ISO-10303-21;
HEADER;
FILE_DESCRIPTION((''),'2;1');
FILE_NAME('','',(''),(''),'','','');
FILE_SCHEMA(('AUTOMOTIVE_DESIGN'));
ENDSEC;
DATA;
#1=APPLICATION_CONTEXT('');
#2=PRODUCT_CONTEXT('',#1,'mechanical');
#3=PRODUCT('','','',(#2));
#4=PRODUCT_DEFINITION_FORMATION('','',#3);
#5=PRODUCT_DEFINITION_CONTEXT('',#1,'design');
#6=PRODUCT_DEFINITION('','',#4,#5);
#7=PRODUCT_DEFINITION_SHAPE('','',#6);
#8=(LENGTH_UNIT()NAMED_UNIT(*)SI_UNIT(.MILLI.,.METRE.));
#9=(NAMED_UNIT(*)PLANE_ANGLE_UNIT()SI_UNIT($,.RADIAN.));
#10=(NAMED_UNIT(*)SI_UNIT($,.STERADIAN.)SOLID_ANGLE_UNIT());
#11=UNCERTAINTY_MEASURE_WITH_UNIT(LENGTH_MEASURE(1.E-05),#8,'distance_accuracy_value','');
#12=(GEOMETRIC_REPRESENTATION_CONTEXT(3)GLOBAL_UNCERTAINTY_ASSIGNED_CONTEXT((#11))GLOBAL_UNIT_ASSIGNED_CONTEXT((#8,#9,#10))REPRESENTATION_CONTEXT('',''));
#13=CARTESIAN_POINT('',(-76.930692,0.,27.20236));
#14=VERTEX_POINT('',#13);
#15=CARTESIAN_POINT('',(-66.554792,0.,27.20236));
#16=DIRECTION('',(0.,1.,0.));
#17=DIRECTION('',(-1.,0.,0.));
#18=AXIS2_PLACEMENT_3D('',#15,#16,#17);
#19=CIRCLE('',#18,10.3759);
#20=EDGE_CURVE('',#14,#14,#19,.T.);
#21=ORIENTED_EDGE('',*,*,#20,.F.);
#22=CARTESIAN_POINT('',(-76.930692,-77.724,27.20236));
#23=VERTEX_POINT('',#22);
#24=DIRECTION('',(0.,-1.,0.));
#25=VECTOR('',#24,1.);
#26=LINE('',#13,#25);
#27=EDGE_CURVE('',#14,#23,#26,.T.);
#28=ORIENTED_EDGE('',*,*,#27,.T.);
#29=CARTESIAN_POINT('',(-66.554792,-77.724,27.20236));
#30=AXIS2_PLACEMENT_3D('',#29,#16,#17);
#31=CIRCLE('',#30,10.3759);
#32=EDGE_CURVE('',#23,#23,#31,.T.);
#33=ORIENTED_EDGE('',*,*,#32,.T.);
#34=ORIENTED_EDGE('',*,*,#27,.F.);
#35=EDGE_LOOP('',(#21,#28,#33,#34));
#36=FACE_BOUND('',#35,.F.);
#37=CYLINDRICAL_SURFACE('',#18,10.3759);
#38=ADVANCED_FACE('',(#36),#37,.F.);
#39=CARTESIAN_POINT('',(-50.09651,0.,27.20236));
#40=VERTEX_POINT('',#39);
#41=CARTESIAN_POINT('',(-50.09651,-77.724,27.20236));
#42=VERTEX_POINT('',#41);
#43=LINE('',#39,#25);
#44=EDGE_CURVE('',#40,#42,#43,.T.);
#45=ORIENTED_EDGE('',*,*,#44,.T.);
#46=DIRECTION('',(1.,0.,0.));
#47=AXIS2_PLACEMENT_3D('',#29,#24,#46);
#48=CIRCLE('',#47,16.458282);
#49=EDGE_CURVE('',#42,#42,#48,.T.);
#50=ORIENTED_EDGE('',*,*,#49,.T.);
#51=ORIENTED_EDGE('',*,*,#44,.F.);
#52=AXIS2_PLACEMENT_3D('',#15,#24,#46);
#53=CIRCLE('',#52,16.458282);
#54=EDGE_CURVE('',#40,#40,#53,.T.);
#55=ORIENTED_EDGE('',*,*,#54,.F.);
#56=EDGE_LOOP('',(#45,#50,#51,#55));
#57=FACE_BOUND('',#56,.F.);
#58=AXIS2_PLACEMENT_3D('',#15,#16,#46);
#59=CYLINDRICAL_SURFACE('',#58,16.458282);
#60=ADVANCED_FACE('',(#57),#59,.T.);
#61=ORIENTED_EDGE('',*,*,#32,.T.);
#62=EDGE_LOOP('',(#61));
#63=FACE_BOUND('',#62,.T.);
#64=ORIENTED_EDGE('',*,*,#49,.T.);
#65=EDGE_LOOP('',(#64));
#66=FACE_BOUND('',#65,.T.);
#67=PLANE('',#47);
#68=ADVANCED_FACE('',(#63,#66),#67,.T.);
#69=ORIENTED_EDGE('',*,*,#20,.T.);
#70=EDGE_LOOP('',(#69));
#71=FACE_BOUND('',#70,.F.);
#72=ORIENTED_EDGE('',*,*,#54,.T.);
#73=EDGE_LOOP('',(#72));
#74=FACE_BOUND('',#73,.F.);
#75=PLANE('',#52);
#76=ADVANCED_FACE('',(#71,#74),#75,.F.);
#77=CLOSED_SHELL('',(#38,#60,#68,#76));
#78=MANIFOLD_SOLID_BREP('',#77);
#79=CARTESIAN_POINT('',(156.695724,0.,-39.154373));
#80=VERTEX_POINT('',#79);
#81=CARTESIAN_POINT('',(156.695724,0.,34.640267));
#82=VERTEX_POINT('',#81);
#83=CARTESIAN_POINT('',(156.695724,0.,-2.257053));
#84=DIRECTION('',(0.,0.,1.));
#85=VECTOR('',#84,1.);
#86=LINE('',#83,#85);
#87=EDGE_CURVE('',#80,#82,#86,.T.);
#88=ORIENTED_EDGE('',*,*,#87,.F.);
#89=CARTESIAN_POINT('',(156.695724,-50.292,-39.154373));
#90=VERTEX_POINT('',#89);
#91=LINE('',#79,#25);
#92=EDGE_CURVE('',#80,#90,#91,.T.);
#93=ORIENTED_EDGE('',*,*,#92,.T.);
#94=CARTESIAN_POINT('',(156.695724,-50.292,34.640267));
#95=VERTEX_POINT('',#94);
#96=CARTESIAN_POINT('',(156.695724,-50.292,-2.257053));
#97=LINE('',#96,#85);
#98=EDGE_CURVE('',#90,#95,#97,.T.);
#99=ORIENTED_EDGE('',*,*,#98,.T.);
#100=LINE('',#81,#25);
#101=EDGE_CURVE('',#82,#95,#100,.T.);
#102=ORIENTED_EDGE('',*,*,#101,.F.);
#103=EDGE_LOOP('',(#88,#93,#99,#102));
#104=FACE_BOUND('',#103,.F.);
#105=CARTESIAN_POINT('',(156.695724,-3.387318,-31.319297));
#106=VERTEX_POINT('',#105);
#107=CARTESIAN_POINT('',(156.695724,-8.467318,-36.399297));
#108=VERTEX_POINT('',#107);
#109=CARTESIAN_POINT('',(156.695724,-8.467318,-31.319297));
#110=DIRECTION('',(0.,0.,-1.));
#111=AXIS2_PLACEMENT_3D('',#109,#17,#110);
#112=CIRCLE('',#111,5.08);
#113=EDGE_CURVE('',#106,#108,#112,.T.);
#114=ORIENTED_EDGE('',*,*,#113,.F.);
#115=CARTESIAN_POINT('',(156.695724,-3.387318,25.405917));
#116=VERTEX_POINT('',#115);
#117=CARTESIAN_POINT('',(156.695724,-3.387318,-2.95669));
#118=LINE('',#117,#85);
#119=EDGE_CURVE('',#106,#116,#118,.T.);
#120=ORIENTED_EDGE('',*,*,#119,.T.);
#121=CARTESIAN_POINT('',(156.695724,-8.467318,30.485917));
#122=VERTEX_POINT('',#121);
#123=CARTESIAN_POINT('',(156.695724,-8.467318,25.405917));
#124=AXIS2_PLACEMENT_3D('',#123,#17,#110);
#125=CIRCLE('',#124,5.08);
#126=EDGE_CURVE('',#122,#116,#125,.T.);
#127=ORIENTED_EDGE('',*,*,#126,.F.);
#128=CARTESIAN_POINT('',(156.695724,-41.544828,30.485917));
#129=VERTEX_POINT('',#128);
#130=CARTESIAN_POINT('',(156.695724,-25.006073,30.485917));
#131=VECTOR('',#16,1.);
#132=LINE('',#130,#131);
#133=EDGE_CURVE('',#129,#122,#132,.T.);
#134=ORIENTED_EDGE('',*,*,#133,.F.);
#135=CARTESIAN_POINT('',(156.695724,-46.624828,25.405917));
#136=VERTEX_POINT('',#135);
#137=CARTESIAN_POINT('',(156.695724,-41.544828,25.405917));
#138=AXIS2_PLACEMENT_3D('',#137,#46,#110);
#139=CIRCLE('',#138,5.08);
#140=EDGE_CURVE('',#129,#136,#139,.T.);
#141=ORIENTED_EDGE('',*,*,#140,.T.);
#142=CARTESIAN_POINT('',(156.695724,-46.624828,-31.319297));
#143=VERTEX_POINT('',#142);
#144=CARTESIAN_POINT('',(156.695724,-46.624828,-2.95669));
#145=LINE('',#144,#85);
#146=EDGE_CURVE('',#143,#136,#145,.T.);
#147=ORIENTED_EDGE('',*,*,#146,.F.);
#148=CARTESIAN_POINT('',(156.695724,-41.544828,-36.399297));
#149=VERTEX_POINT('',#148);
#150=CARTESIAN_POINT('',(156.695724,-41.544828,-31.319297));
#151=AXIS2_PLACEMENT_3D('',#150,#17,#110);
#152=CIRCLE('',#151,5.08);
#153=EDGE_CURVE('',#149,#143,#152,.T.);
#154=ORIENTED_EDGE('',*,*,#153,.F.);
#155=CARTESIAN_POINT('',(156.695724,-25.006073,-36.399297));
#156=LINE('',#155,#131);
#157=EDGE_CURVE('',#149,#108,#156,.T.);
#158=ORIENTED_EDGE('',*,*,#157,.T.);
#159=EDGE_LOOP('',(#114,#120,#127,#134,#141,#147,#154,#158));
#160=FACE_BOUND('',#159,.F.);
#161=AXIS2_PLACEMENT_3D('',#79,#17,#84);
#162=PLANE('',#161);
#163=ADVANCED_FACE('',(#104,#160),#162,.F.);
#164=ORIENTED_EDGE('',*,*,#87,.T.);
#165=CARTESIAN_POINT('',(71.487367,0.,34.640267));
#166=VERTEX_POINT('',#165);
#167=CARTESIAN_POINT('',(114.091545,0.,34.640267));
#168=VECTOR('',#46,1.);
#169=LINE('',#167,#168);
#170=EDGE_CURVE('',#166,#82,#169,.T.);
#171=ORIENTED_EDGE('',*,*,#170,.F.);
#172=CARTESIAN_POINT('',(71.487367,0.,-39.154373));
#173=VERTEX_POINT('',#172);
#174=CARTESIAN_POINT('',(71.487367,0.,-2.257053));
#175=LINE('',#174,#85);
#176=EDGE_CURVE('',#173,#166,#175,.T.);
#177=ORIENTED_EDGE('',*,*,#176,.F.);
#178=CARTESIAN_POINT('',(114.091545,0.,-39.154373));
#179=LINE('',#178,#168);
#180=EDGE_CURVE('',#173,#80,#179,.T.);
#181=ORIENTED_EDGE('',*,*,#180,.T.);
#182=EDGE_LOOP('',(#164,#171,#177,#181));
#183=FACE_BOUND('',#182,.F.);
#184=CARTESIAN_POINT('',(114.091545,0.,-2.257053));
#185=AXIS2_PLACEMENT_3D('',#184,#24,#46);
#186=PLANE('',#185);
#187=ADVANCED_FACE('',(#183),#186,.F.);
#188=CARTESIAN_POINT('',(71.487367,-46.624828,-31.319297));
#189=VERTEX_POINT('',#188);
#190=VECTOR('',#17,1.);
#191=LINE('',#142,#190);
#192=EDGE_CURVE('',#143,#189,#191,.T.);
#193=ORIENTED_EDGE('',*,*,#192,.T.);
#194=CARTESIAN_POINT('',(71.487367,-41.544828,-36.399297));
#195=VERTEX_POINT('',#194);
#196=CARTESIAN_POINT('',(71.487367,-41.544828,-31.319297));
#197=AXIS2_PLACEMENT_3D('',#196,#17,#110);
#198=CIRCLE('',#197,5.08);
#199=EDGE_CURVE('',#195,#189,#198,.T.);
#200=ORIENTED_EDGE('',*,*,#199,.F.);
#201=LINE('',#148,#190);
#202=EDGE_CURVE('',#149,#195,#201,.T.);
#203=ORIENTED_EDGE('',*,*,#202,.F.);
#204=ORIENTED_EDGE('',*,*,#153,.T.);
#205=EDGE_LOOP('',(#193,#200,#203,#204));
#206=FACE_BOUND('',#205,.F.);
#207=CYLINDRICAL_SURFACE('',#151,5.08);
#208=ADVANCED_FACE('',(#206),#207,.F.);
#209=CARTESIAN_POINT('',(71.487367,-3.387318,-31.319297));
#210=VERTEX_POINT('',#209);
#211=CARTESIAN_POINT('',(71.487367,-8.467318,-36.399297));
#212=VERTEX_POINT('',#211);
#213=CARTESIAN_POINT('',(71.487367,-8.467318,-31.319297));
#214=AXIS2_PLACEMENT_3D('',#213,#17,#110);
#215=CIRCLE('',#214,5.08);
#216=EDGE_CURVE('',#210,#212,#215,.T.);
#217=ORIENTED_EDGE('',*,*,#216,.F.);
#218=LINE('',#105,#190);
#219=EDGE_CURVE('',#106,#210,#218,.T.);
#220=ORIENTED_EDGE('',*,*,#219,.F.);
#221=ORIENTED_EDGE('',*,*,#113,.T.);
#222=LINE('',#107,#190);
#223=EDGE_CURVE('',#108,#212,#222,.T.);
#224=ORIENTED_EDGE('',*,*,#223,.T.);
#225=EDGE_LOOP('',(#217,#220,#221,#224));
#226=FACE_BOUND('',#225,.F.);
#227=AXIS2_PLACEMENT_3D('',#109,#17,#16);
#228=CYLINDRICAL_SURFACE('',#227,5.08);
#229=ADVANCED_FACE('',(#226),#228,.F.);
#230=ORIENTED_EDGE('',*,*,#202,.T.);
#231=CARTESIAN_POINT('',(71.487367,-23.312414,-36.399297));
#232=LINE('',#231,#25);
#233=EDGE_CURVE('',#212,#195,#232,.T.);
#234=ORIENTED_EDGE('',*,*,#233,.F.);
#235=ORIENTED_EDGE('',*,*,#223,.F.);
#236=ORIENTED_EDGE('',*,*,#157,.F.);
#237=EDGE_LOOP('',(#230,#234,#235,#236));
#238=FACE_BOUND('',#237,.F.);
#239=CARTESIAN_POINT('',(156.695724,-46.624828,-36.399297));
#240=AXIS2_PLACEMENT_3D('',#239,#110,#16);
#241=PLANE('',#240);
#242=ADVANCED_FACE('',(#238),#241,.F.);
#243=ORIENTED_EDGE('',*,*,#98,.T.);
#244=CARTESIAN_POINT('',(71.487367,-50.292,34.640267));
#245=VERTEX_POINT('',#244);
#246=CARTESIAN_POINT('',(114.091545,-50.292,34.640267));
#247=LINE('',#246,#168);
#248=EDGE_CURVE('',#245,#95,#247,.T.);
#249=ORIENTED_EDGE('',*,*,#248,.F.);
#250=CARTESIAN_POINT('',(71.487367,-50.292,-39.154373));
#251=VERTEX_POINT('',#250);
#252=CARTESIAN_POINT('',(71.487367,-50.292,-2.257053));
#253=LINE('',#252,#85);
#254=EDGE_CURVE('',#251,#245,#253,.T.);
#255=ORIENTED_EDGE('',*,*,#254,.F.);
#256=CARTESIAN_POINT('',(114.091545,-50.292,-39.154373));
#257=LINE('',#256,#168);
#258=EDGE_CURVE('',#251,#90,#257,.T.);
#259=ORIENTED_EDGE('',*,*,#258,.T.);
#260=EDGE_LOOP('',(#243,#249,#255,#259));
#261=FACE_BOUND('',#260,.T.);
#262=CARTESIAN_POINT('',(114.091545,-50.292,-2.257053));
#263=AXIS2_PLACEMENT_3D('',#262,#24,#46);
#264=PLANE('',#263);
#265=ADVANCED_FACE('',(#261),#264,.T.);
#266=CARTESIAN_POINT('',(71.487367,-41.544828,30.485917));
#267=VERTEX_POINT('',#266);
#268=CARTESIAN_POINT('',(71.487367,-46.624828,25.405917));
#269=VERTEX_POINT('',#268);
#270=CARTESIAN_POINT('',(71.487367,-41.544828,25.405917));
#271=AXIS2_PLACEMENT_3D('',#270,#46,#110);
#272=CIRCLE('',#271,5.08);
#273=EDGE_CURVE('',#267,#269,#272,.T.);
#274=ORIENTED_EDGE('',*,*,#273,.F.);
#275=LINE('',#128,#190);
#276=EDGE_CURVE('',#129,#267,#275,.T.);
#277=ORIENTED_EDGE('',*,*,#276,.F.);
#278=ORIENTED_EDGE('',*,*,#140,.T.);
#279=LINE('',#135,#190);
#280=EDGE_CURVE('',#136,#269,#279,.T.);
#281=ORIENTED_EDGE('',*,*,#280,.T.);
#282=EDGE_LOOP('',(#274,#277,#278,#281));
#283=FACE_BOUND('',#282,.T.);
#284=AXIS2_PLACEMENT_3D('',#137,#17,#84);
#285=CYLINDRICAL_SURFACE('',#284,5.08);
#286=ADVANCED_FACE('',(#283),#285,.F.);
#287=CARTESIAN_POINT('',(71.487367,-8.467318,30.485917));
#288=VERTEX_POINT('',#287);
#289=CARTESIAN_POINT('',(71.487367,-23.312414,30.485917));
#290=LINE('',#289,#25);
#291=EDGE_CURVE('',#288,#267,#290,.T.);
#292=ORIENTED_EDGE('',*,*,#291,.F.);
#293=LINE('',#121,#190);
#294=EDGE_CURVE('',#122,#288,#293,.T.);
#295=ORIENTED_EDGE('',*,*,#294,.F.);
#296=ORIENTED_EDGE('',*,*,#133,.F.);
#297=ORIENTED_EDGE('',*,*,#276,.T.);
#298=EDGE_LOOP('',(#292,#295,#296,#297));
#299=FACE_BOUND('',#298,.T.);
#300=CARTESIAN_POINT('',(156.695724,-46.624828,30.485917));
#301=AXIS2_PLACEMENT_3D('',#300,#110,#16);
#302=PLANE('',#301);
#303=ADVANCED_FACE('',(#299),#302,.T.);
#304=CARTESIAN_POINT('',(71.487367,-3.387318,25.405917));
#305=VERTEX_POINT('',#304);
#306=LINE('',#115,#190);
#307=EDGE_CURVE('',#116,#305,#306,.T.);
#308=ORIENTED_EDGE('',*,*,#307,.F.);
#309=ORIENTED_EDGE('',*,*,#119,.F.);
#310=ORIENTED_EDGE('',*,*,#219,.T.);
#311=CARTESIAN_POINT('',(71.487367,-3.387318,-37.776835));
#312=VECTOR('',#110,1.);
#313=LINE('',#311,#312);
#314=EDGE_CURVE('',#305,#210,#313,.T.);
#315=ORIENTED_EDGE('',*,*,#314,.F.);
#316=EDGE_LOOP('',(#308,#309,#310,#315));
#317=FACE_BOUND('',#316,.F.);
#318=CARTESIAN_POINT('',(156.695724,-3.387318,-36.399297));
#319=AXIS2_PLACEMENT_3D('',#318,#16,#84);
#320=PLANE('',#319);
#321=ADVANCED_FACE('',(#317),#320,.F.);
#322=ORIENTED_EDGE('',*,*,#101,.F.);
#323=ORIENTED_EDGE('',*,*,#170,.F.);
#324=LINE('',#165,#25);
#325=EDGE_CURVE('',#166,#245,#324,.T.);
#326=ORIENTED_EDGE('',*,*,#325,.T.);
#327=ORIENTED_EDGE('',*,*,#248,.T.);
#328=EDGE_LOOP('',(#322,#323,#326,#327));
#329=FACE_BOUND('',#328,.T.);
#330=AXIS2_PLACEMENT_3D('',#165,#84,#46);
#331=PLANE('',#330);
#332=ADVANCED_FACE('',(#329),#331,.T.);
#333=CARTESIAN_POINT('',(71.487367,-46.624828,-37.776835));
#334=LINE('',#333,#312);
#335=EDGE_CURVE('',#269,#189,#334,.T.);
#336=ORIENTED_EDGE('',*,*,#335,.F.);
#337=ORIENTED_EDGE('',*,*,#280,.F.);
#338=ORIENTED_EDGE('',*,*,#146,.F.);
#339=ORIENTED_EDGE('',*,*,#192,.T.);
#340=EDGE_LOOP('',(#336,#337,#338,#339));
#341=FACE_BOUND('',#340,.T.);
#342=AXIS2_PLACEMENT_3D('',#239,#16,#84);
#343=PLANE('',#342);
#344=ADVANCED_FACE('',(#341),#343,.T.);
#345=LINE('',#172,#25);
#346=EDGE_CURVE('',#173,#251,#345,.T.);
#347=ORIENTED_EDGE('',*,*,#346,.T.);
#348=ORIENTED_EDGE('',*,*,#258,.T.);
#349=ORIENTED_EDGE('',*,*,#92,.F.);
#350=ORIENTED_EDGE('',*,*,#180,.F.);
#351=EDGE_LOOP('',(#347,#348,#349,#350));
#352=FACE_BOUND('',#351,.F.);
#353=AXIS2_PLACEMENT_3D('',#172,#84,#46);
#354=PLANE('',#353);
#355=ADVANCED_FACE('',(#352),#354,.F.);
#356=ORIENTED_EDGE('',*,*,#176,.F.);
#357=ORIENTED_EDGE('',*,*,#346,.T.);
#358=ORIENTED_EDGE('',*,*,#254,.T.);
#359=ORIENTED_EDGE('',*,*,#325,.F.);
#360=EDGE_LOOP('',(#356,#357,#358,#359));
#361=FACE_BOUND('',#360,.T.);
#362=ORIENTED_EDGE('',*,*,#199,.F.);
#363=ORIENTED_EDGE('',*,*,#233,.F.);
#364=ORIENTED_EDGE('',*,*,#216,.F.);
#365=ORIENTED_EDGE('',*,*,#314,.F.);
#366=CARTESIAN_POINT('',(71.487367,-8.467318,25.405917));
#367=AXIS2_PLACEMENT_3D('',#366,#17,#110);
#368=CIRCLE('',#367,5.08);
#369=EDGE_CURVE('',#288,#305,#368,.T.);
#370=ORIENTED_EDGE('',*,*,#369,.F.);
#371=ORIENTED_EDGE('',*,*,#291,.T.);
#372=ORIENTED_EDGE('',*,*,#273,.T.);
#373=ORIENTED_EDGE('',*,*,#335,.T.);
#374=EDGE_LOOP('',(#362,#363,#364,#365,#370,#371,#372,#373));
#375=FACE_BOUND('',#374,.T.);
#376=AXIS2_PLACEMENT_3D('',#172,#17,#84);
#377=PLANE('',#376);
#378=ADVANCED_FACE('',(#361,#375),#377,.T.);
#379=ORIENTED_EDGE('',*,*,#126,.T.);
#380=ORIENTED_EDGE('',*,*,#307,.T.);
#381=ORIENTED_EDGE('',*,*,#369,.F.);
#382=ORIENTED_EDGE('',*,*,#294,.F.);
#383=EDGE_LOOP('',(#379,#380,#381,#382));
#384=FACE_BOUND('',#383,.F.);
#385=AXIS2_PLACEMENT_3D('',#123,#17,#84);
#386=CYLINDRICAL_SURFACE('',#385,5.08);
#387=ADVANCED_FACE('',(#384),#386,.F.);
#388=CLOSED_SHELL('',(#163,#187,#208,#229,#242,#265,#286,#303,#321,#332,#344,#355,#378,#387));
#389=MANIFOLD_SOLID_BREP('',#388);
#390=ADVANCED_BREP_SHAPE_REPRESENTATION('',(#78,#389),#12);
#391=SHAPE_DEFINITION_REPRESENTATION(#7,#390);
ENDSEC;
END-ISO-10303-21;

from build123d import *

# Parameters (mm, degrees)
F0_R     = 16.4582820338
F0_R_2   = 10.3759
F1_DEPTH = 77.724
F2_R     = 10.3759
F3_DEPTH = 121.158
F4_W     = 85.2083563805
F4_H     = 73.7946406007
F5_DEPTH = 50.292
F6_W     = 43.2375106029
F6_H     = 66.885214299
F7_DEPTH = 214.122
F8_R     = 5.08


with BuildPart() as f1:
    # F0 (on Front) → F1 (new body)
    with BuildSketch(Plane.XZ):
        with Locations((-66.5547922254, 27.202360332)):
            Circle(F0_R)
        with Locations((-66.5547922254, 27.202360332)):
            Circle(F0_R_2, mode=Mode.SUBTRACT)
        with Locations((-66.5547922254, 27.202360332)):
            Circle(F0_R_2)
    extrude(amount=F1_DEPTH)

    # F2 (on face) → F3 (cut)
    with BuildSketch(Plane(origin=(0, 0, 0), x_dir=(-1, 0, 0), z_dir=(0, 1, 0))):
        with Locations((66.5547922254, 27.202360332)):
            Circle(F2_R)
    extrude(amount=-F3_DEPTH, mode=Mode.SUBTRACT)


with BuildPart() as f5:
    # F4 (on Front) → F5 (new body)
    with BuildSketch(Plane.XZ):
        with Locations((114.0915453434, -2.257052809)):
            Rectangle(F4_W, F4_H)
    extrude(amount=F5_DEPTH)

    # F6 (on face) → F7 (cut)
    with BuildSketch(Plane.YZ.offset(156.6957235336)):
        with Locations((-25.0060728285, -2.9566902667)):
            Rectangle(F6_W, F6_H)
    extrude(amount=-F7_DEPTH, mode=Mode.SUBTRACT)

    # F8
    f8_edges = [f5.edges().sort_by_distance(p)[0] for p in [
        (114.091545, -3.387318, 30.485917),
        (114.091545, -46.624828, 30.485917),
        (114.091545, -46.624828, -36.399297),
        (114.091545, -3.387318, -36.399297),
    ]]
    fillet(f8_edges, radius=F8_R)


solid = Compound([f1.part, f5.part])
